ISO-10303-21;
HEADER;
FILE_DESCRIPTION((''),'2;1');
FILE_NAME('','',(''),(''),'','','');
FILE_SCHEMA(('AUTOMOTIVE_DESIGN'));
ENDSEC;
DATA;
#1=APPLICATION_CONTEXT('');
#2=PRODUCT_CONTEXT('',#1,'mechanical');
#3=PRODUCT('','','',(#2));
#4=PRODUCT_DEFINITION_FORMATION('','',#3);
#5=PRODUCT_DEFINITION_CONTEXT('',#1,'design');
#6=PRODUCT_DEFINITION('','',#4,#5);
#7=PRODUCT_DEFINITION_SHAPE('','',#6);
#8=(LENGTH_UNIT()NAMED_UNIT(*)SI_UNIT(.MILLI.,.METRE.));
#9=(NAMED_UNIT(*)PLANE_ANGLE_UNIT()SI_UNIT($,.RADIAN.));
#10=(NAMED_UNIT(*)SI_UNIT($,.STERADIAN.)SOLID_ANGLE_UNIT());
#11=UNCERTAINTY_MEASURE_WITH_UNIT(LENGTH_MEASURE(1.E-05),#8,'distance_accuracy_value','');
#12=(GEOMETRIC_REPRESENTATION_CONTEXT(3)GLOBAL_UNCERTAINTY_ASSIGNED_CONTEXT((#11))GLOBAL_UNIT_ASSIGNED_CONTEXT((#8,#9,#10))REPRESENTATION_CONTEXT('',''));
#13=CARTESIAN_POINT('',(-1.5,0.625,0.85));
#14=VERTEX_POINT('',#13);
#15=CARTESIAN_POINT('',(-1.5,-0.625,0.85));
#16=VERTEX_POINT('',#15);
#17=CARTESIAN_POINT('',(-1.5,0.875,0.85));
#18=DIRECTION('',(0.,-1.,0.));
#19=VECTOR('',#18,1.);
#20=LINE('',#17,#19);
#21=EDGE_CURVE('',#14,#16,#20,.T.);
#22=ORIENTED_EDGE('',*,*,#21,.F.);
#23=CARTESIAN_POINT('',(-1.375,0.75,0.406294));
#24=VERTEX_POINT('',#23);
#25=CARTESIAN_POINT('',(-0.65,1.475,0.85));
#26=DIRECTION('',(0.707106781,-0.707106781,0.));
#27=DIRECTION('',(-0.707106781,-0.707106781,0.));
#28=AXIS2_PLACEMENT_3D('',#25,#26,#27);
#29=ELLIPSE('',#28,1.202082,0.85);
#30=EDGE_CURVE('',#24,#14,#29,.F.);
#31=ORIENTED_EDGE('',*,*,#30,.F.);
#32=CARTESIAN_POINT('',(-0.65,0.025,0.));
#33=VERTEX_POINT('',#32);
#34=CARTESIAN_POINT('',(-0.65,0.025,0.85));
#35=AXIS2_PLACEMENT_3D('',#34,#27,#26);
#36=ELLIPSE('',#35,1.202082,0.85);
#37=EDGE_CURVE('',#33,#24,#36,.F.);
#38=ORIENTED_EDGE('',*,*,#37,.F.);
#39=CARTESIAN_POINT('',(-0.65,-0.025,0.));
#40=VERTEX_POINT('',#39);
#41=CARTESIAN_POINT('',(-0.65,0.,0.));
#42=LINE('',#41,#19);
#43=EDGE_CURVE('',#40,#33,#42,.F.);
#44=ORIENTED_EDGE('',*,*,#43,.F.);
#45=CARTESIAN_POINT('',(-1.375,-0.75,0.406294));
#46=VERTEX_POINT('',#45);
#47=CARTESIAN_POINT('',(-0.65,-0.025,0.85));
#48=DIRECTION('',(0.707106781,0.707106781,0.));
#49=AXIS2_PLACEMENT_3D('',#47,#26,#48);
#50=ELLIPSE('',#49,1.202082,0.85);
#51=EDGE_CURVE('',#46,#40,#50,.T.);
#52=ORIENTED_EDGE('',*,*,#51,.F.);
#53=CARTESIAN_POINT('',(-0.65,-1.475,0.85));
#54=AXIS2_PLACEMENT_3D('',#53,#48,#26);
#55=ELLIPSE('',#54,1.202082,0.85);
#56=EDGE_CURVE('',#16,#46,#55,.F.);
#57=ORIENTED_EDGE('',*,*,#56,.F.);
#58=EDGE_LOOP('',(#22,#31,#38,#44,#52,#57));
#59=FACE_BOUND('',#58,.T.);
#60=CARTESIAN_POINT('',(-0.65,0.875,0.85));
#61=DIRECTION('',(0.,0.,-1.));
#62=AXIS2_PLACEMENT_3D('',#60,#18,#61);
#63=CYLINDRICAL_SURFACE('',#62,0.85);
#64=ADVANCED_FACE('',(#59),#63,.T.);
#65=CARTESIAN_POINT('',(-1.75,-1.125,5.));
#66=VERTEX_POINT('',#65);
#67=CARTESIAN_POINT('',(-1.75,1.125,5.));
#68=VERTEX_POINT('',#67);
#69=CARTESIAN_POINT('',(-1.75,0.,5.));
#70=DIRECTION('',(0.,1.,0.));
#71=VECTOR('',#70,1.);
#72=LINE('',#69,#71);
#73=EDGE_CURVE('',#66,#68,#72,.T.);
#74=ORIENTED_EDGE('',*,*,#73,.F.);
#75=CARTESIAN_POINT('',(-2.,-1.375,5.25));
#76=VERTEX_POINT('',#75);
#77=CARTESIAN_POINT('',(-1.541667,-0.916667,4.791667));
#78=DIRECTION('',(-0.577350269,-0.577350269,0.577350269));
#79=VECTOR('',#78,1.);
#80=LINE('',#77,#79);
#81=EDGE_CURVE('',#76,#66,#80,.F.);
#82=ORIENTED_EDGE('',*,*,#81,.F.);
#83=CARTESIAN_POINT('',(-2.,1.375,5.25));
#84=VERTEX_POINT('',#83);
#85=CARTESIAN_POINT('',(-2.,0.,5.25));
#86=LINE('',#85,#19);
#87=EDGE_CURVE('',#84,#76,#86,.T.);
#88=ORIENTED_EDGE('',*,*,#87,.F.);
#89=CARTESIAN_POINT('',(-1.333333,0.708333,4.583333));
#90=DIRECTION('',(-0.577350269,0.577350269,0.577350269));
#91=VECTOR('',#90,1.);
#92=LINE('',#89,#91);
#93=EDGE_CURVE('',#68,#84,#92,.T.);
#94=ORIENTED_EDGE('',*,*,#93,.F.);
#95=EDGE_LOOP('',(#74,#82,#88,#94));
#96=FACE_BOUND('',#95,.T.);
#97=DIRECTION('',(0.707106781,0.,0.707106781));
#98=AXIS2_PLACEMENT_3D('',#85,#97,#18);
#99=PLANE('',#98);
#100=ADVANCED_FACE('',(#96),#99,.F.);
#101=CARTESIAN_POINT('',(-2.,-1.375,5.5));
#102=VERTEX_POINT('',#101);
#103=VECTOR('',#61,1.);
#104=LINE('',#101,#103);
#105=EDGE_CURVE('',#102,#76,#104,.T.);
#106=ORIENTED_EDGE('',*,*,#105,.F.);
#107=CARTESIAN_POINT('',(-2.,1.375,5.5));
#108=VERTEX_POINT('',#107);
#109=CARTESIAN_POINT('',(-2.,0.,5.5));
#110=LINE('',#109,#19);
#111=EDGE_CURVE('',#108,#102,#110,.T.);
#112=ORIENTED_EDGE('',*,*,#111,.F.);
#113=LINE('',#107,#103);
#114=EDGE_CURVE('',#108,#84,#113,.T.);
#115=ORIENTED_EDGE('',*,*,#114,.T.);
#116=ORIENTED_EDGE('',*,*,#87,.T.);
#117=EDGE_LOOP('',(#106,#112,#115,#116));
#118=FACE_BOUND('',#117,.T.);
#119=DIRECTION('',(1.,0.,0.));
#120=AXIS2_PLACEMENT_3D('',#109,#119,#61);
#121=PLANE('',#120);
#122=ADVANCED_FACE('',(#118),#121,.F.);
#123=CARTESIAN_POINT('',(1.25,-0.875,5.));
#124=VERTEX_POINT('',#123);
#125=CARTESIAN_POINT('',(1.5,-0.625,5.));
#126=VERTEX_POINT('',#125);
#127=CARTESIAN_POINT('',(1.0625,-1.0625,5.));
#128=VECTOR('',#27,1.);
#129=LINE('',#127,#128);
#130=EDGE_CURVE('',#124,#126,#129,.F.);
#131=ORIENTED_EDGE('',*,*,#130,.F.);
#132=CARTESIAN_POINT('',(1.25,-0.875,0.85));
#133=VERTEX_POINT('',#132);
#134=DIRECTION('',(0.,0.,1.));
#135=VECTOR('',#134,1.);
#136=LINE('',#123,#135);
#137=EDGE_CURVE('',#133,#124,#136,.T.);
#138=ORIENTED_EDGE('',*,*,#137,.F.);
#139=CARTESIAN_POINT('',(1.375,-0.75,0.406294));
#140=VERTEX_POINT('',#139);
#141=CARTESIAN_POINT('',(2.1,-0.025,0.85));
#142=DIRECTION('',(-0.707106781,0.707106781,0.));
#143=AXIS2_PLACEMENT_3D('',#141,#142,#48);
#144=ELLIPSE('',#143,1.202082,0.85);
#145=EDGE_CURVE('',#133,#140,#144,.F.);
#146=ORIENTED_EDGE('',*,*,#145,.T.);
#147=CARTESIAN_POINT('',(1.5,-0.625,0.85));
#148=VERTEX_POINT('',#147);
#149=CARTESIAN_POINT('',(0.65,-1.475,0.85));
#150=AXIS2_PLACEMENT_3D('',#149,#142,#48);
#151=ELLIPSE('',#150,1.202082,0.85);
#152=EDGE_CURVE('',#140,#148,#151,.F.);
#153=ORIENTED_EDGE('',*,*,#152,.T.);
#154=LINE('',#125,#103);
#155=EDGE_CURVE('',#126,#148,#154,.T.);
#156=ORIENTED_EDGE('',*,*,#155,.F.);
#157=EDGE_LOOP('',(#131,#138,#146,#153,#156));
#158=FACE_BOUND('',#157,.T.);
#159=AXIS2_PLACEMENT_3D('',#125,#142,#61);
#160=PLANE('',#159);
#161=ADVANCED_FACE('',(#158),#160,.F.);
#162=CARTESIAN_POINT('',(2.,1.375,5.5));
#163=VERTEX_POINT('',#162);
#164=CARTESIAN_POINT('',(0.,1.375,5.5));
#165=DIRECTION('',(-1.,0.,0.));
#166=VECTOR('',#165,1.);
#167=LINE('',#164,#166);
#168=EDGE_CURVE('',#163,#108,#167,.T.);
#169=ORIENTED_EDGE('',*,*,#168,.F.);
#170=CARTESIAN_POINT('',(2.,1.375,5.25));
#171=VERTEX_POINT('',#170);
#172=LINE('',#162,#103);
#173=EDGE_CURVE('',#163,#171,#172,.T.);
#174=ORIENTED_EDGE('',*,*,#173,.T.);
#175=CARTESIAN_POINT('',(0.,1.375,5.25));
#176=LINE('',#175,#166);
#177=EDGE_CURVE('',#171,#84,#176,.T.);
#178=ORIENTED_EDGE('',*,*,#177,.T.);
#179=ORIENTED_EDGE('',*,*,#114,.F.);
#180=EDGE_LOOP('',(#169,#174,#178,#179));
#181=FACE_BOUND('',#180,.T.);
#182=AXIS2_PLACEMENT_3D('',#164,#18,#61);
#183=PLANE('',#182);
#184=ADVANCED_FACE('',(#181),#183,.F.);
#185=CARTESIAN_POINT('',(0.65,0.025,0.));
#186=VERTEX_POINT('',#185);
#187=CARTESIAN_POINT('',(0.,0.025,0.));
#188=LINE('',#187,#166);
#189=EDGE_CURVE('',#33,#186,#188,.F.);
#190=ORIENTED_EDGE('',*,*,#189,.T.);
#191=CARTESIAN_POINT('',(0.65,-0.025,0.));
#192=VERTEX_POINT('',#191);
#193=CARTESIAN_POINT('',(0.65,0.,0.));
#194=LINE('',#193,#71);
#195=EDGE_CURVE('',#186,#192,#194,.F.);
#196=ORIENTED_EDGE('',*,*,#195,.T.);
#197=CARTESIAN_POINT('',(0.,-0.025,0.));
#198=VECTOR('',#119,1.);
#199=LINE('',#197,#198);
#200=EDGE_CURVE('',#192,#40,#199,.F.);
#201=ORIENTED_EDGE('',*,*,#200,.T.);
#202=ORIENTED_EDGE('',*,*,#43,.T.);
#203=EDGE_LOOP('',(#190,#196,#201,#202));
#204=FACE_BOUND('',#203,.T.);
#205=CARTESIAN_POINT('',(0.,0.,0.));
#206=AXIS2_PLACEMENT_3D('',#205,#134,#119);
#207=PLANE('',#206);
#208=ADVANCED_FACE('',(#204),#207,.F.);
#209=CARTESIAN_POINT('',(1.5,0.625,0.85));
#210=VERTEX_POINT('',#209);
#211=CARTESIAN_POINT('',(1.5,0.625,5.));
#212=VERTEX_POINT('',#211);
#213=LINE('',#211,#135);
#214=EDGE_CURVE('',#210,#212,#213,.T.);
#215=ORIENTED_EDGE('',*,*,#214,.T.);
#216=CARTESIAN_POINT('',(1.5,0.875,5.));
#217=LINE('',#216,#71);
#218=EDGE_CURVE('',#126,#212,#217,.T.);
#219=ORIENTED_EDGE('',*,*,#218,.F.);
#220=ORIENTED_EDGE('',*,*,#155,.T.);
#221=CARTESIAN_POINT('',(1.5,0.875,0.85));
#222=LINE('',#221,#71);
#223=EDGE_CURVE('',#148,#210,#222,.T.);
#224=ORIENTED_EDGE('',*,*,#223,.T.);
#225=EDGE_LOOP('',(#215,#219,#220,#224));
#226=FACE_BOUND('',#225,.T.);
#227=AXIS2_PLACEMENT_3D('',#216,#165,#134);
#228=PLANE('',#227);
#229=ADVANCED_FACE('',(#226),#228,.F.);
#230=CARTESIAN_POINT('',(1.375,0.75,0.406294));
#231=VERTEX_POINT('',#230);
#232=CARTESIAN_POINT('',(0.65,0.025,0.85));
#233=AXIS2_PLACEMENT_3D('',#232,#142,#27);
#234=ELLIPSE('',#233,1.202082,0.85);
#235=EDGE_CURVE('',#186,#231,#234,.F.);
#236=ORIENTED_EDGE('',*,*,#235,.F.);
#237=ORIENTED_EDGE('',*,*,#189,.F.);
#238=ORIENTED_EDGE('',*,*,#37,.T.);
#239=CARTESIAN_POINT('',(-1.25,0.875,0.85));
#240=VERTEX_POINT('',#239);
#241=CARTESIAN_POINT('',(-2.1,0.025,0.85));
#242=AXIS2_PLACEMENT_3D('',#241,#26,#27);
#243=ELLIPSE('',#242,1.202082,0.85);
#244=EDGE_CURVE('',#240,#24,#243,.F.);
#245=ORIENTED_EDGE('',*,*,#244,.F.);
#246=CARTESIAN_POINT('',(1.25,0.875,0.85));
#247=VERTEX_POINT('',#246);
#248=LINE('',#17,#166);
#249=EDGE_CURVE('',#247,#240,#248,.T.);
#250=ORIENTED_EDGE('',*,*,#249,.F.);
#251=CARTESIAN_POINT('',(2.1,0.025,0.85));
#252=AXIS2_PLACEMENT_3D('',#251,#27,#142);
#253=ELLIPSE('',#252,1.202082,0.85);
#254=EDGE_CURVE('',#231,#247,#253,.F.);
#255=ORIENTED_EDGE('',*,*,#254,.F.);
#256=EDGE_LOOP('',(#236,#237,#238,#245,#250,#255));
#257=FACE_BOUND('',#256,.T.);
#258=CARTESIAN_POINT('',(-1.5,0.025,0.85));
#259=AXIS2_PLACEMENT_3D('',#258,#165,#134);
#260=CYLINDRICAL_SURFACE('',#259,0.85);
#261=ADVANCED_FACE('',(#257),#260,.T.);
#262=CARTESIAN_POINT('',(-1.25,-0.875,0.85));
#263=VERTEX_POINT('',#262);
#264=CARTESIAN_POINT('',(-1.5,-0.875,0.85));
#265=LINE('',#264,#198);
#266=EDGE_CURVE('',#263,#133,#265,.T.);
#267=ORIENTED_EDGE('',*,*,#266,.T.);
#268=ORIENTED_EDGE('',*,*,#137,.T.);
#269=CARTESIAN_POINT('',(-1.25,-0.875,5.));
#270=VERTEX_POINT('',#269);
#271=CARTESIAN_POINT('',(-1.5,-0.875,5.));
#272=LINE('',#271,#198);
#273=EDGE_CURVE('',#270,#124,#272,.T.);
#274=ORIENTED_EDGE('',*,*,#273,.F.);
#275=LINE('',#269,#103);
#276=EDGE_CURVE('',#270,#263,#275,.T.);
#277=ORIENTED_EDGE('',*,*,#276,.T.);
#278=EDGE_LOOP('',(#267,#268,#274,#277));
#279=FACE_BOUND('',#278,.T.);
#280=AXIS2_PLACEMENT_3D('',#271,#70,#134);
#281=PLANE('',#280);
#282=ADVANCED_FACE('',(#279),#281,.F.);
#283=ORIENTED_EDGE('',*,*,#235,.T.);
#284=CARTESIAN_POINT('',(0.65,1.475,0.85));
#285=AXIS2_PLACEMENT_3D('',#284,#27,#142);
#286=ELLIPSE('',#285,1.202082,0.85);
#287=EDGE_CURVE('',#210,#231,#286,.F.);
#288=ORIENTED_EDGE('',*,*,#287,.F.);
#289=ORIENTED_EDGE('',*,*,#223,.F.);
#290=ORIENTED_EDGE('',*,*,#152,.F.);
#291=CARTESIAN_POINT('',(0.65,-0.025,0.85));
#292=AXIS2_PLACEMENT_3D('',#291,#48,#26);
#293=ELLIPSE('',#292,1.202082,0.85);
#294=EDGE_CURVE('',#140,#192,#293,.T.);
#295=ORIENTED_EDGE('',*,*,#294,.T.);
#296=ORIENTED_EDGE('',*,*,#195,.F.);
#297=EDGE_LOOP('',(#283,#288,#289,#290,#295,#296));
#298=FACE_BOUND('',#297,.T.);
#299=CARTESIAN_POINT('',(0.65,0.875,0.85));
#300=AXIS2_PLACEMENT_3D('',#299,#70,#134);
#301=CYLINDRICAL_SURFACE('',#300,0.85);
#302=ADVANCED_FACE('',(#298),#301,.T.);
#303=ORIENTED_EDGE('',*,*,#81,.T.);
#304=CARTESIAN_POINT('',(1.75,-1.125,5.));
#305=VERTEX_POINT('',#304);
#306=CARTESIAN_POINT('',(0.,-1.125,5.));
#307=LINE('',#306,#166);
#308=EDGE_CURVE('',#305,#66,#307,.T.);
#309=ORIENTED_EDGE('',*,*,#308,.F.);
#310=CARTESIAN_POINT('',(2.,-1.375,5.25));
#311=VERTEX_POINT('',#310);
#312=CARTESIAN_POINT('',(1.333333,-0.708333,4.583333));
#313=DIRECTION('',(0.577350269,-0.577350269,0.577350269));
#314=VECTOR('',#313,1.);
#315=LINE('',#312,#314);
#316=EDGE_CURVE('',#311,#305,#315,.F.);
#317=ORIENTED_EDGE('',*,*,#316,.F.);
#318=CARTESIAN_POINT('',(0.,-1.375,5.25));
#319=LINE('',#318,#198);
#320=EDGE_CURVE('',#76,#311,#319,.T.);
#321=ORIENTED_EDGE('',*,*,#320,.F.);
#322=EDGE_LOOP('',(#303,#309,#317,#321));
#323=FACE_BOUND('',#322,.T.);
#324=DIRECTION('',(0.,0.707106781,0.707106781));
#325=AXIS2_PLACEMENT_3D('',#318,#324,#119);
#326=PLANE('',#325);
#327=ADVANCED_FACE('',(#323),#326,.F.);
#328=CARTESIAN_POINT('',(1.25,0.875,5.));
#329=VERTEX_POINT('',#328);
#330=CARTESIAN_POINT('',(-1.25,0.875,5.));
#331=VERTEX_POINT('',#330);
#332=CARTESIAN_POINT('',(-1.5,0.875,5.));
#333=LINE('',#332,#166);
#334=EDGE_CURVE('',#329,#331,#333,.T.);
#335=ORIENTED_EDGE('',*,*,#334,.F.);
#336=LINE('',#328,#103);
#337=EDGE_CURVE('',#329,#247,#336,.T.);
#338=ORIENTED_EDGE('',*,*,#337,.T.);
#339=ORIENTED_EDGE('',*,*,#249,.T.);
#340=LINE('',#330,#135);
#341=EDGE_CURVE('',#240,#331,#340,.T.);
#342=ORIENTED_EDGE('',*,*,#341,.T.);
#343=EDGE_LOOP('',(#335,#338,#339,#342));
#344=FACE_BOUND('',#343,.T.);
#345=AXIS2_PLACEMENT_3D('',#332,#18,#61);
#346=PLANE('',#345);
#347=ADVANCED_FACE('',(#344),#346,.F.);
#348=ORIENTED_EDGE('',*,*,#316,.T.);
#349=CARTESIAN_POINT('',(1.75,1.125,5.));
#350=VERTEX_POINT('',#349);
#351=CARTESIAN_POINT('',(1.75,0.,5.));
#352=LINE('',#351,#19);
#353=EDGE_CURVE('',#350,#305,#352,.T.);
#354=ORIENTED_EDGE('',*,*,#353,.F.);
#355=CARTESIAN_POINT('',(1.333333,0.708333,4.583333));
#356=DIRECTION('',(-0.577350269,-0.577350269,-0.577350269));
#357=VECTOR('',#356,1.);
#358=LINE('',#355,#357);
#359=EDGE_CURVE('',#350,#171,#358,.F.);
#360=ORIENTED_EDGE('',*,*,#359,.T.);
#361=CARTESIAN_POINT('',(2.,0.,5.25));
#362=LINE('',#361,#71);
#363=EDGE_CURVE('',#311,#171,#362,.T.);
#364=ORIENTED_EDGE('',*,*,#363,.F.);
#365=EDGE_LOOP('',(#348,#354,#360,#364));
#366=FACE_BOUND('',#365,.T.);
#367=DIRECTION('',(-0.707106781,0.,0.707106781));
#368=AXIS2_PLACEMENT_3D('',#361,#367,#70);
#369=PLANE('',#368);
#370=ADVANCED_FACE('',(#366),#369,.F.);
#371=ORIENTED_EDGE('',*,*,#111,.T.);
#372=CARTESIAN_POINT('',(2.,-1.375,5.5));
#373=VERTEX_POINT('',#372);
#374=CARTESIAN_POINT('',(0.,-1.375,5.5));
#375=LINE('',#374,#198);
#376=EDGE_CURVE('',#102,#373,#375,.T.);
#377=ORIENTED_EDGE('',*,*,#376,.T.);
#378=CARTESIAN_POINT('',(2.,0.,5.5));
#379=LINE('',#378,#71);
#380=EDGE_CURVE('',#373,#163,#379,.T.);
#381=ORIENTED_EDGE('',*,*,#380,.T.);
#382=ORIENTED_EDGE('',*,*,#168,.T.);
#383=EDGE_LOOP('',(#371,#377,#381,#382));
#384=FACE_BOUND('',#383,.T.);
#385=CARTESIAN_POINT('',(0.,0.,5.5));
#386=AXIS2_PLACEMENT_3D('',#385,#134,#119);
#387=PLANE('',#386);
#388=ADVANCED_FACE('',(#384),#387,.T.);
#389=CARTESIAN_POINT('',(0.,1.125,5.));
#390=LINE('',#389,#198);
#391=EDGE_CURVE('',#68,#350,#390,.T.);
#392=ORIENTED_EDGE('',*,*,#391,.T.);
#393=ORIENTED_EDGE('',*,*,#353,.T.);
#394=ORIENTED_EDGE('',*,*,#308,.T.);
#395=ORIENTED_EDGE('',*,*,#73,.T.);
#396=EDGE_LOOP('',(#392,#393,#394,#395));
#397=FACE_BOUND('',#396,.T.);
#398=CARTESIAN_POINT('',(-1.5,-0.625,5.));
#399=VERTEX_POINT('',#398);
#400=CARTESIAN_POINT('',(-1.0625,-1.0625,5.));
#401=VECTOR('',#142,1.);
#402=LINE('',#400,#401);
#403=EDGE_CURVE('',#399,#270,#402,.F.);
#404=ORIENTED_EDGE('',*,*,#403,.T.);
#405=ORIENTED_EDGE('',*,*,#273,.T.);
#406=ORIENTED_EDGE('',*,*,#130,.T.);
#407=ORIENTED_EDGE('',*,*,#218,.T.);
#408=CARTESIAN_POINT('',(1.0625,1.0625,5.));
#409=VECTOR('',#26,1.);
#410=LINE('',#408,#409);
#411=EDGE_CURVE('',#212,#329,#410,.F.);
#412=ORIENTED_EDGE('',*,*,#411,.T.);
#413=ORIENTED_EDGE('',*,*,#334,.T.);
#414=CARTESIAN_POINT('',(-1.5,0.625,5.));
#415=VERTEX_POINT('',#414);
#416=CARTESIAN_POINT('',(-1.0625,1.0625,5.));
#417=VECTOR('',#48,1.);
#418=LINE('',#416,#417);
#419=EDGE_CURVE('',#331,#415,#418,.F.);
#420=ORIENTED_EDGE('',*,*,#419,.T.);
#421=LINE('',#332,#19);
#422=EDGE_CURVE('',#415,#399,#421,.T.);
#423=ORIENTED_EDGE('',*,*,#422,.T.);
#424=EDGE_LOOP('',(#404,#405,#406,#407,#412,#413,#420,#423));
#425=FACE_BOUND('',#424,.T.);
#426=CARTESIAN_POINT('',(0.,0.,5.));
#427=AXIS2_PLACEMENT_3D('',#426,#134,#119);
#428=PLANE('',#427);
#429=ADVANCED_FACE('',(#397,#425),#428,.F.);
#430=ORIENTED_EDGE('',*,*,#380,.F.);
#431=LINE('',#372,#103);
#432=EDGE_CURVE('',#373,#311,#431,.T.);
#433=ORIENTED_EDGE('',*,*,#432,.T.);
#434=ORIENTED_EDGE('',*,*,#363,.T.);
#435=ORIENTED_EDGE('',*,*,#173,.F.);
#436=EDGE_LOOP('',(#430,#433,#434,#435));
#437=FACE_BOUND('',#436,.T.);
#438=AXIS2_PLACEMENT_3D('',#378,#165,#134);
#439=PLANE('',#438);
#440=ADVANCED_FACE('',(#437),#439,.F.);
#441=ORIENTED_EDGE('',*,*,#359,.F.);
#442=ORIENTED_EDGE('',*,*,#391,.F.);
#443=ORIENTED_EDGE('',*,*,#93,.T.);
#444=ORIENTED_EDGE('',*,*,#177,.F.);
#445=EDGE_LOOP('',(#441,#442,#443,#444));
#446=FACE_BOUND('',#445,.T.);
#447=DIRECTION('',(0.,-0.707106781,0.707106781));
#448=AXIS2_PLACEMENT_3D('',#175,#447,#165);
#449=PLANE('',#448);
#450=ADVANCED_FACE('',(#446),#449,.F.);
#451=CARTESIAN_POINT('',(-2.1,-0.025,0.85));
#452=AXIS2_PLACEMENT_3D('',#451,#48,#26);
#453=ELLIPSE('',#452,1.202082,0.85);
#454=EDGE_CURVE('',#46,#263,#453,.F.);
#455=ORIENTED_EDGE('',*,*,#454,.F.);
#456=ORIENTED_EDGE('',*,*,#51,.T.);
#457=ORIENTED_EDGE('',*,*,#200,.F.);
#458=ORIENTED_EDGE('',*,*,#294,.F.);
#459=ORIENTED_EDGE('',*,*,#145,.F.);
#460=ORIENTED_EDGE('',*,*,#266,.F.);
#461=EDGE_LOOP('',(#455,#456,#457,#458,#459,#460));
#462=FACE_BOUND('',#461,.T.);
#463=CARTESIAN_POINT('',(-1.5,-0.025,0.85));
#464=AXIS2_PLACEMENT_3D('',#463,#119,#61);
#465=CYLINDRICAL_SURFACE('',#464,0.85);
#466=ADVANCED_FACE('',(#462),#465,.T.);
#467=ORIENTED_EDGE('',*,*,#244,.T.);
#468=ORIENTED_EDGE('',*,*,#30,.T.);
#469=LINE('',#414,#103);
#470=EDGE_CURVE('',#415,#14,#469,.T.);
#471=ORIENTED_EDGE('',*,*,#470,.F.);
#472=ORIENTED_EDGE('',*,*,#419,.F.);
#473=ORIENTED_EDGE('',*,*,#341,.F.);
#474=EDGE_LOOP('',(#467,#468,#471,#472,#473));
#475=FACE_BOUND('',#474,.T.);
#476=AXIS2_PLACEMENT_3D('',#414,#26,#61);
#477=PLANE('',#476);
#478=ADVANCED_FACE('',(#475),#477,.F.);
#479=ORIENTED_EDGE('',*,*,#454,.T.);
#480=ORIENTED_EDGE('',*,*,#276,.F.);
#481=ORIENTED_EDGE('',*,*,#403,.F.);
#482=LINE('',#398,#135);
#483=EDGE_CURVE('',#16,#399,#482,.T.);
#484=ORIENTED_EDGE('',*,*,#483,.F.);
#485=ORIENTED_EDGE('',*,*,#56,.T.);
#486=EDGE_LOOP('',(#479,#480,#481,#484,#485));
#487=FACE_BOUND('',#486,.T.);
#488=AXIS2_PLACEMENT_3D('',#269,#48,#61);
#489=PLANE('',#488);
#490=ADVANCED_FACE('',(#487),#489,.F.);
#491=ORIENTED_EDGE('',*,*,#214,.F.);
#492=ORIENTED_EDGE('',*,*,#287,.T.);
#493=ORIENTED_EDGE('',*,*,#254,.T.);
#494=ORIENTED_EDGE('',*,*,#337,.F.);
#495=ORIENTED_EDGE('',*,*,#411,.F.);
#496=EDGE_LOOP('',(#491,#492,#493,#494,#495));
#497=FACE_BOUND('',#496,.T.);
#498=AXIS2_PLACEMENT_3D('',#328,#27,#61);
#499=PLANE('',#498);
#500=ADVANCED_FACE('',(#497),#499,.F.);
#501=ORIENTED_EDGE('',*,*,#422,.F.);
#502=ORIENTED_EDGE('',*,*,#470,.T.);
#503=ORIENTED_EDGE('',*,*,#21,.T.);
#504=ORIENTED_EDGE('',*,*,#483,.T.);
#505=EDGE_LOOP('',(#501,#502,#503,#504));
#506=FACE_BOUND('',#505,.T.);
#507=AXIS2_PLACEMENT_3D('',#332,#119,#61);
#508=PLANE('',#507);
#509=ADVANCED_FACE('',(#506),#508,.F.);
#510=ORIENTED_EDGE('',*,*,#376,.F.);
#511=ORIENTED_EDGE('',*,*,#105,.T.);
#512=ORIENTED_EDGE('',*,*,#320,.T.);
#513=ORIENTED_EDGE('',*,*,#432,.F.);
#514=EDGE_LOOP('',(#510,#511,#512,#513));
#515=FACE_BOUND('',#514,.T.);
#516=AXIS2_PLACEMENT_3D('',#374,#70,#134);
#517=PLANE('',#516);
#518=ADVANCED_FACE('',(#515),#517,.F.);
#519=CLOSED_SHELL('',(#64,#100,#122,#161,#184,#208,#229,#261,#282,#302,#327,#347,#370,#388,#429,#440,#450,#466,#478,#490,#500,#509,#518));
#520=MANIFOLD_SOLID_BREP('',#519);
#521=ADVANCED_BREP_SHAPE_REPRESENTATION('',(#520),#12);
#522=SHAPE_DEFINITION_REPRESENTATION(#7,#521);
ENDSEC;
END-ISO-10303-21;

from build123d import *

# Parameters (mm, degrees)
SKETCH1_W           = 3
SKETCH1_H           = 1.75
BOSS_EXTRUDE1_DEPTH = 5
SKETCH2_W           = 4
SKETCH2_H           = 2.75
SKETCH2_W_2         = 3
SKETCH2_H_2         = 1.75
BOSS_EXTRUDE2_DEPTH = 0.5
CHAMFER1_SIZE       = 0.25
FILLET1_R           = 0.85


with BuildPart() as part:
    # Sketch1 → Boss-Extrude1 (new body)
    with BuildSketch(Plane.XY):
        Rectangle(SKETCH1_W, SKETCH1_H)
    extrude(amount=BOSS_EXTRUDE1_DEPTH)

    # Sketch2 → Boss-Extrude2 (add)
    # profile 1 of 2: a face of its own
    with BuildSketch(Plane.XY.offset(5)):
        Rectangle(SKETCH2_W, SKETCH2_H)
        Rectangle(SKETCH2_W_2, SKETCH2_H_2, mode=Mode.SUBTRACT)
    # profile 2 of 2: a face of its own
    with BuildSketch(Plane.XY.offset(5)):
        Rectangle(SKETCH2_W_2, SKETCH2_H_2)
    extrude(amount=BOSS_EXTRUDE2_DEPTH)

    # Chamfer1
    chamfer1_edges = [part.edges().sort_by_distance(p)[0] for p in [
        (0, -1.375, 5),
        (2, 0, 5),
        (0, 1.375, 5),
        (-2, 0, 5),
        (1.5, -0.875, 2.5),
        (-1.5, -0.875, 2.5),
        (-1.5, 0.875, 2.5),
        (1.5, 0.875, 2.5),
    ]]
    chamfer(chamfer1_edges, length=CHAMFER1_SIZE)

    # Fillet1
    # the kernel refuses this fillet: 0.85 mm, written as the material it takes off along each edge
    with BuildSketch(Plane(origin=(-3.375, 0.875, 0), x_dir=(0, 0, 1), z_dir=(1, 0, 0)), Plane(origin=(3.375, -0.875, 0), x_dir=(0, 0, 1), z_dir=(-1, 0, 0))) as fillet1_piece_1:
        with BuildLine():
            CenterArc((FILLET1_R, FILLET1_R), FILLET1_R, 180, 90)
            Line((0, FILLET1_R), (0, 0))
            Line((0, 0), (FILLET1_R, 0))
        make_face()
    extrude(amount=6.75, mode=Mode.SUBTRACT)
    with BuildSketch(Plane(origin=(-1.5, -2.75, 0), x_dir=(0, 0, 1), z_dir=(0, 1, 0)), Plane(origin=(1.5, 2.75, 0), x_dir=(0, 0, 1), z_dir=(0, -1, 0))) as fillet1_piece_2:
        with BuildLine():
            CenterArc((FILLET1_R, FILLET1_R), FILLET1_R, 180, 90)
            Line((0, FILLET1_R), (0, 0))
            Line((0, 0), (FILLET1_R, 0))
        make_face()
    extrude(amount=5.5, mode=Mode.SUBTRACT)


solid = part.part
